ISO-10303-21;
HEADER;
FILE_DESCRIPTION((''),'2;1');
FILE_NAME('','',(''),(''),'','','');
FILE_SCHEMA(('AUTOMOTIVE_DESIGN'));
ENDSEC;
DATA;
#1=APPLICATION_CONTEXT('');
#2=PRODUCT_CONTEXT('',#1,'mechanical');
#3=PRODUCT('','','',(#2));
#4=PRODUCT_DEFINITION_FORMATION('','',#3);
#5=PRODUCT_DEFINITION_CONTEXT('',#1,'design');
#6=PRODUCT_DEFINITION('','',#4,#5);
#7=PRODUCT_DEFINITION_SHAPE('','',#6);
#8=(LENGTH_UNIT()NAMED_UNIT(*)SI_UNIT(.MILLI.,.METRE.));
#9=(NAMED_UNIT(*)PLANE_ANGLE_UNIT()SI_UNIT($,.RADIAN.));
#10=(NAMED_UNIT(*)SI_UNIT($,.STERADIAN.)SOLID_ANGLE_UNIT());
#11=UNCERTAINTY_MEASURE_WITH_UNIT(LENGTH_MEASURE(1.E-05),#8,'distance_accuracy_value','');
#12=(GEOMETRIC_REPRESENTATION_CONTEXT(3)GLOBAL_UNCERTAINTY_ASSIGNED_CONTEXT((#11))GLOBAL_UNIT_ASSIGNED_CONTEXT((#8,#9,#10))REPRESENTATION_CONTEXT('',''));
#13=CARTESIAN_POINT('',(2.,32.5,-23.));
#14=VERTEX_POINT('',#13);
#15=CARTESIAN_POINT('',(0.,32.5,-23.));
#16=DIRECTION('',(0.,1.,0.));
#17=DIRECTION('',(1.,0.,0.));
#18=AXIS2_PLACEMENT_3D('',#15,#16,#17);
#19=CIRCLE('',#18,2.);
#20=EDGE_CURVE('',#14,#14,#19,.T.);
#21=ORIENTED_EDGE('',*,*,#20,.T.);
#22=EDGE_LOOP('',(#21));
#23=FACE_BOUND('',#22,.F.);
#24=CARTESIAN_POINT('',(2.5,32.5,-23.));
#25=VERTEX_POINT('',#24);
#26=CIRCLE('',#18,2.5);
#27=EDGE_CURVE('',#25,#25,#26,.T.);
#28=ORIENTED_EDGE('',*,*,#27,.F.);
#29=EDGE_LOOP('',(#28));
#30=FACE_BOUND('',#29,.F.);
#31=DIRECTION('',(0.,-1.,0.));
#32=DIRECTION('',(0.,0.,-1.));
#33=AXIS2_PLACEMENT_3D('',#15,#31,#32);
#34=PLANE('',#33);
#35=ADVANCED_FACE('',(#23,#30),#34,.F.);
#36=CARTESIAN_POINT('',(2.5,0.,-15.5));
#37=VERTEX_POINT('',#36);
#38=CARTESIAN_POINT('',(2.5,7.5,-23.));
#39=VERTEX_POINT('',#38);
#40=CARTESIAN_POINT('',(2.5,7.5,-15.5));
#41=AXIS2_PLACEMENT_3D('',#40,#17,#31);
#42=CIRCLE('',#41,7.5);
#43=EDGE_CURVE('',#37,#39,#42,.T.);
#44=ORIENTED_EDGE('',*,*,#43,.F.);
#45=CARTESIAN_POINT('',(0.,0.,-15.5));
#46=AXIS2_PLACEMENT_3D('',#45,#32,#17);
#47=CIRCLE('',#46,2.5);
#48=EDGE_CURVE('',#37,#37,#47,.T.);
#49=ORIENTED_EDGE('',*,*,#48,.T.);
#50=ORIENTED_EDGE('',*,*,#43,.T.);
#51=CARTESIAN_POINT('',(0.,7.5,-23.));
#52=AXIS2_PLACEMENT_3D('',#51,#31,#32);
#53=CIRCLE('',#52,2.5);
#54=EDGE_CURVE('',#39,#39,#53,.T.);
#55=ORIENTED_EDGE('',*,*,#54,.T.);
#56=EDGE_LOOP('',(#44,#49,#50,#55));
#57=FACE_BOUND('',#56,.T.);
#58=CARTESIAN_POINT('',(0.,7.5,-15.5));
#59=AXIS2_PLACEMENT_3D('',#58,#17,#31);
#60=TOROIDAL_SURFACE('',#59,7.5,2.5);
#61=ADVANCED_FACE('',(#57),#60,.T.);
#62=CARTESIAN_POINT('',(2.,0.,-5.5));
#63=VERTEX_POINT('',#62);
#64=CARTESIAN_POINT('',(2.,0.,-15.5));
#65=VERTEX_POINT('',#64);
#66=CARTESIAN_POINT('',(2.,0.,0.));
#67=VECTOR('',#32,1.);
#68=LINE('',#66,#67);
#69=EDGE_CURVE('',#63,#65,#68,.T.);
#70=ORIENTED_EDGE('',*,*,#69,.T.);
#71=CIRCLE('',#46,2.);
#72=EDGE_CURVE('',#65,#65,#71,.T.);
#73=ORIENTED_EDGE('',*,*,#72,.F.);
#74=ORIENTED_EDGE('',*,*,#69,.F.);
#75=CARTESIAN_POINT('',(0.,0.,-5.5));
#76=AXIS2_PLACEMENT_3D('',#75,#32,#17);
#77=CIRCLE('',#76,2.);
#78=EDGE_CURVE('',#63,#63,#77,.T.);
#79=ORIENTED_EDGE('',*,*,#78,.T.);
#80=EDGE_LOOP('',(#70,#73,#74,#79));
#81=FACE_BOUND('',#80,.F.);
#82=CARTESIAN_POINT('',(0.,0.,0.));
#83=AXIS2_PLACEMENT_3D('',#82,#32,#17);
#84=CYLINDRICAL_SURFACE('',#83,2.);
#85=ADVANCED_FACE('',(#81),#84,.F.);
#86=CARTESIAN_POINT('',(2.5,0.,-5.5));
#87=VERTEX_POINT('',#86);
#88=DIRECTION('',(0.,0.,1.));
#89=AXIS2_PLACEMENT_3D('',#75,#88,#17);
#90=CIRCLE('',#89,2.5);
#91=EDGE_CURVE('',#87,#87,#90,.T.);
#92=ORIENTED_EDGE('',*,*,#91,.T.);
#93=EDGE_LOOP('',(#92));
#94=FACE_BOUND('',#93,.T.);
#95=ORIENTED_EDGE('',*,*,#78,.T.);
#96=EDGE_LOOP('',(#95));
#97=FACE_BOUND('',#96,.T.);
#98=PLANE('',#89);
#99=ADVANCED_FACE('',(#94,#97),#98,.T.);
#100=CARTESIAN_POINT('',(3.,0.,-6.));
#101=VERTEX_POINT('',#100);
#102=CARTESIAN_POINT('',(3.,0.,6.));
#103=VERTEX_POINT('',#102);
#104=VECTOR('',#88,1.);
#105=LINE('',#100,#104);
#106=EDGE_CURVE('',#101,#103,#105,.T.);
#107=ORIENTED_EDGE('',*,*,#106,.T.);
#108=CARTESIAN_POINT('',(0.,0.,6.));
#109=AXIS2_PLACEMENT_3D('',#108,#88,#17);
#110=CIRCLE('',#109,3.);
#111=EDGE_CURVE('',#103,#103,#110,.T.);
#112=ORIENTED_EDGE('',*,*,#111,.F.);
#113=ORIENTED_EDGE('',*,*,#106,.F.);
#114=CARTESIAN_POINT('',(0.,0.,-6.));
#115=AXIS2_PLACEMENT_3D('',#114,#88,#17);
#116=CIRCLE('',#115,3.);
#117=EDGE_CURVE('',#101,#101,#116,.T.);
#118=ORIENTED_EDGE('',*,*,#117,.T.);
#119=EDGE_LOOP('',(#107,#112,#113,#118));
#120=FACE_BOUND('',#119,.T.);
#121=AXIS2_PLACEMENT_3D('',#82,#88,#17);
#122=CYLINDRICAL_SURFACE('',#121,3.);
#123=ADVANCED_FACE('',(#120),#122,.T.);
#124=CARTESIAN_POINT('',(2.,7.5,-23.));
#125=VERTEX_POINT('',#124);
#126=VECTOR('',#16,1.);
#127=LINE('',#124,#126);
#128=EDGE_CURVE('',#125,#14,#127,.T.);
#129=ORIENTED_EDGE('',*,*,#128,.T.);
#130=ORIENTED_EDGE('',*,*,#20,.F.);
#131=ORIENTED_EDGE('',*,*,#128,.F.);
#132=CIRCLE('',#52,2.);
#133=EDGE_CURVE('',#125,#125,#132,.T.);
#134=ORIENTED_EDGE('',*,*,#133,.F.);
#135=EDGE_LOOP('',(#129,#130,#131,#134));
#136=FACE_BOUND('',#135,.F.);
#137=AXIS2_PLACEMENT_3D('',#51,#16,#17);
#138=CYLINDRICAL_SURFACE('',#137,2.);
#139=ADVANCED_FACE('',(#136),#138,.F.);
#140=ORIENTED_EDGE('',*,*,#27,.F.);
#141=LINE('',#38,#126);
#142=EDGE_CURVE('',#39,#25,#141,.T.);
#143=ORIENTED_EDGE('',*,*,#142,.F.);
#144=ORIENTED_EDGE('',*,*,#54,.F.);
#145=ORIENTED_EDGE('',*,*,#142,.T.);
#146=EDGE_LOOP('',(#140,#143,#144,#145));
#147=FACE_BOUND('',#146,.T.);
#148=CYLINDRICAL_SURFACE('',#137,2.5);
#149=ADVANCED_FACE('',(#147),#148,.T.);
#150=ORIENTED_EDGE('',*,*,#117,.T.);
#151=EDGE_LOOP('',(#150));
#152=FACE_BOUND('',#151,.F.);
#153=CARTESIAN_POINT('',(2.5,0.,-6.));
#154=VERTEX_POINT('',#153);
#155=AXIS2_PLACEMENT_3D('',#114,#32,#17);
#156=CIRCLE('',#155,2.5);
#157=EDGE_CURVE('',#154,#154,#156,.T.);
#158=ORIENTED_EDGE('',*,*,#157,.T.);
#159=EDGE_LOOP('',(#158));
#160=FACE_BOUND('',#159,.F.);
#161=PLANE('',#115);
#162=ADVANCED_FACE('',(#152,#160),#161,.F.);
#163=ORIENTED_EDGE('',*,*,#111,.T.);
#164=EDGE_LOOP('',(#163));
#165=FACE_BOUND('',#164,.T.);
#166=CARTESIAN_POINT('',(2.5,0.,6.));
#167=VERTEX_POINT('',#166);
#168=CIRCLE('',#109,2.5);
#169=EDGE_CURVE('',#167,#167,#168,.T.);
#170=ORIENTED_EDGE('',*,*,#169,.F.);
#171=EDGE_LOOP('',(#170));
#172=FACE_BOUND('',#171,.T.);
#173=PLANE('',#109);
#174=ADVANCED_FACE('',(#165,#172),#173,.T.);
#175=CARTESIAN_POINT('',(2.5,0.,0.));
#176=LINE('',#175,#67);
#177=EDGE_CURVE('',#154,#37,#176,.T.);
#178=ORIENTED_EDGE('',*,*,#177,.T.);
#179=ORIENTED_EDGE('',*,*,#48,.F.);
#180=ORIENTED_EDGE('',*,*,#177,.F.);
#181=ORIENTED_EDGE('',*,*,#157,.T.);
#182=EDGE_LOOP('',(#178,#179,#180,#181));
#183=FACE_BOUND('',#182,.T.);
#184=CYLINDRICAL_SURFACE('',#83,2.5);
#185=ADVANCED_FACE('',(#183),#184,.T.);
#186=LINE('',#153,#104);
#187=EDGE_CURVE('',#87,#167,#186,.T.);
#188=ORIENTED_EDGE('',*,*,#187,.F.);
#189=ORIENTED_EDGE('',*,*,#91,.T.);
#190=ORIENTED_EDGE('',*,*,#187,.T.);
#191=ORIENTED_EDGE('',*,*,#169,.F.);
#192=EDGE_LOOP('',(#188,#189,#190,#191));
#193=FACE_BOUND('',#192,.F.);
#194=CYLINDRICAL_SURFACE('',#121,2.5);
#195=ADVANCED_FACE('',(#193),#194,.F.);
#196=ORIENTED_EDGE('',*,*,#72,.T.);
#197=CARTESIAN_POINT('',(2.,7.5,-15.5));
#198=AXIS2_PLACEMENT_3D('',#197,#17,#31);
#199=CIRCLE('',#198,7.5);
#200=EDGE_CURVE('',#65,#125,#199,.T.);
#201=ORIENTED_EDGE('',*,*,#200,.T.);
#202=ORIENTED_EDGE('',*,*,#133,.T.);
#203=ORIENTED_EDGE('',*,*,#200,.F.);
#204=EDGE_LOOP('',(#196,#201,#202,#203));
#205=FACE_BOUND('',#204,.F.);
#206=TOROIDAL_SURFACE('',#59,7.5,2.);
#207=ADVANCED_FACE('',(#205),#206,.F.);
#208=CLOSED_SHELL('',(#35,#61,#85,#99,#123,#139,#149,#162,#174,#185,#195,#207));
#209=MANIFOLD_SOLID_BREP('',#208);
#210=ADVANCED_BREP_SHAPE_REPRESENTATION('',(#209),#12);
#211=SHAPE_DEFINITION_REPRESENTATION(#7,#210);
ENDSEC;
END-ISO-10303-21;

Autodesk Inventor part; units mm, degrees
ref_plane "YZ Plane" through (0, 0, 0) normal (1, 0, 0) x (0, 1, 0)
ref_plane "XZ Plane" through (0, 0, 0) normal (0, 1, 0) x (-1, 0, 0)
ref_plane "XY Plane" through (0, 0, 0) normal (0, 0, 1) x (1, 0, 0)
sketch "Sketch1" plane through (0, 0, 0) normal (0, 0, 1) x (1, 0, 0)
  circle A0 centre (0, 0) radius 2.5
  dimension "d0" = 5
sketch "Sketch2" plane through (0, 0, 0) normal (1, 0, 0) x (0, 1, 0)
  line L0 (0, 0) -> (0, -15.5)
  line L1 (7.5, -23) -> (32.5, -23)
  arc A0 (0, -15.5) -> (7.5, -23) centre (7.5, -15.5) ccw
  point P0 (0, -23)
  dimension "d1" = 23
  dimension "d2" = 7.5
  dimension "d3" = 25
sweep "Sweep1" add profiles "Sketch1" path "Sketch2"
sketch "Sketch3" plane through (0, 0, 0) normal (0, 0, 1) x (1, 0, 0)
  circle A0 centre (0, 0) radius 3
  dimension "d6" = 6
extrude "Extrusion1" add sketch "Sketch3" along normal mid plane 12
shell "Shell1" thickness 0.5 removed faces 2 at (-0.5351, 1.0949, 6) at (-0.2146, 32.5, -22.3381)
properties part number "161" material "Iron, Cast"
